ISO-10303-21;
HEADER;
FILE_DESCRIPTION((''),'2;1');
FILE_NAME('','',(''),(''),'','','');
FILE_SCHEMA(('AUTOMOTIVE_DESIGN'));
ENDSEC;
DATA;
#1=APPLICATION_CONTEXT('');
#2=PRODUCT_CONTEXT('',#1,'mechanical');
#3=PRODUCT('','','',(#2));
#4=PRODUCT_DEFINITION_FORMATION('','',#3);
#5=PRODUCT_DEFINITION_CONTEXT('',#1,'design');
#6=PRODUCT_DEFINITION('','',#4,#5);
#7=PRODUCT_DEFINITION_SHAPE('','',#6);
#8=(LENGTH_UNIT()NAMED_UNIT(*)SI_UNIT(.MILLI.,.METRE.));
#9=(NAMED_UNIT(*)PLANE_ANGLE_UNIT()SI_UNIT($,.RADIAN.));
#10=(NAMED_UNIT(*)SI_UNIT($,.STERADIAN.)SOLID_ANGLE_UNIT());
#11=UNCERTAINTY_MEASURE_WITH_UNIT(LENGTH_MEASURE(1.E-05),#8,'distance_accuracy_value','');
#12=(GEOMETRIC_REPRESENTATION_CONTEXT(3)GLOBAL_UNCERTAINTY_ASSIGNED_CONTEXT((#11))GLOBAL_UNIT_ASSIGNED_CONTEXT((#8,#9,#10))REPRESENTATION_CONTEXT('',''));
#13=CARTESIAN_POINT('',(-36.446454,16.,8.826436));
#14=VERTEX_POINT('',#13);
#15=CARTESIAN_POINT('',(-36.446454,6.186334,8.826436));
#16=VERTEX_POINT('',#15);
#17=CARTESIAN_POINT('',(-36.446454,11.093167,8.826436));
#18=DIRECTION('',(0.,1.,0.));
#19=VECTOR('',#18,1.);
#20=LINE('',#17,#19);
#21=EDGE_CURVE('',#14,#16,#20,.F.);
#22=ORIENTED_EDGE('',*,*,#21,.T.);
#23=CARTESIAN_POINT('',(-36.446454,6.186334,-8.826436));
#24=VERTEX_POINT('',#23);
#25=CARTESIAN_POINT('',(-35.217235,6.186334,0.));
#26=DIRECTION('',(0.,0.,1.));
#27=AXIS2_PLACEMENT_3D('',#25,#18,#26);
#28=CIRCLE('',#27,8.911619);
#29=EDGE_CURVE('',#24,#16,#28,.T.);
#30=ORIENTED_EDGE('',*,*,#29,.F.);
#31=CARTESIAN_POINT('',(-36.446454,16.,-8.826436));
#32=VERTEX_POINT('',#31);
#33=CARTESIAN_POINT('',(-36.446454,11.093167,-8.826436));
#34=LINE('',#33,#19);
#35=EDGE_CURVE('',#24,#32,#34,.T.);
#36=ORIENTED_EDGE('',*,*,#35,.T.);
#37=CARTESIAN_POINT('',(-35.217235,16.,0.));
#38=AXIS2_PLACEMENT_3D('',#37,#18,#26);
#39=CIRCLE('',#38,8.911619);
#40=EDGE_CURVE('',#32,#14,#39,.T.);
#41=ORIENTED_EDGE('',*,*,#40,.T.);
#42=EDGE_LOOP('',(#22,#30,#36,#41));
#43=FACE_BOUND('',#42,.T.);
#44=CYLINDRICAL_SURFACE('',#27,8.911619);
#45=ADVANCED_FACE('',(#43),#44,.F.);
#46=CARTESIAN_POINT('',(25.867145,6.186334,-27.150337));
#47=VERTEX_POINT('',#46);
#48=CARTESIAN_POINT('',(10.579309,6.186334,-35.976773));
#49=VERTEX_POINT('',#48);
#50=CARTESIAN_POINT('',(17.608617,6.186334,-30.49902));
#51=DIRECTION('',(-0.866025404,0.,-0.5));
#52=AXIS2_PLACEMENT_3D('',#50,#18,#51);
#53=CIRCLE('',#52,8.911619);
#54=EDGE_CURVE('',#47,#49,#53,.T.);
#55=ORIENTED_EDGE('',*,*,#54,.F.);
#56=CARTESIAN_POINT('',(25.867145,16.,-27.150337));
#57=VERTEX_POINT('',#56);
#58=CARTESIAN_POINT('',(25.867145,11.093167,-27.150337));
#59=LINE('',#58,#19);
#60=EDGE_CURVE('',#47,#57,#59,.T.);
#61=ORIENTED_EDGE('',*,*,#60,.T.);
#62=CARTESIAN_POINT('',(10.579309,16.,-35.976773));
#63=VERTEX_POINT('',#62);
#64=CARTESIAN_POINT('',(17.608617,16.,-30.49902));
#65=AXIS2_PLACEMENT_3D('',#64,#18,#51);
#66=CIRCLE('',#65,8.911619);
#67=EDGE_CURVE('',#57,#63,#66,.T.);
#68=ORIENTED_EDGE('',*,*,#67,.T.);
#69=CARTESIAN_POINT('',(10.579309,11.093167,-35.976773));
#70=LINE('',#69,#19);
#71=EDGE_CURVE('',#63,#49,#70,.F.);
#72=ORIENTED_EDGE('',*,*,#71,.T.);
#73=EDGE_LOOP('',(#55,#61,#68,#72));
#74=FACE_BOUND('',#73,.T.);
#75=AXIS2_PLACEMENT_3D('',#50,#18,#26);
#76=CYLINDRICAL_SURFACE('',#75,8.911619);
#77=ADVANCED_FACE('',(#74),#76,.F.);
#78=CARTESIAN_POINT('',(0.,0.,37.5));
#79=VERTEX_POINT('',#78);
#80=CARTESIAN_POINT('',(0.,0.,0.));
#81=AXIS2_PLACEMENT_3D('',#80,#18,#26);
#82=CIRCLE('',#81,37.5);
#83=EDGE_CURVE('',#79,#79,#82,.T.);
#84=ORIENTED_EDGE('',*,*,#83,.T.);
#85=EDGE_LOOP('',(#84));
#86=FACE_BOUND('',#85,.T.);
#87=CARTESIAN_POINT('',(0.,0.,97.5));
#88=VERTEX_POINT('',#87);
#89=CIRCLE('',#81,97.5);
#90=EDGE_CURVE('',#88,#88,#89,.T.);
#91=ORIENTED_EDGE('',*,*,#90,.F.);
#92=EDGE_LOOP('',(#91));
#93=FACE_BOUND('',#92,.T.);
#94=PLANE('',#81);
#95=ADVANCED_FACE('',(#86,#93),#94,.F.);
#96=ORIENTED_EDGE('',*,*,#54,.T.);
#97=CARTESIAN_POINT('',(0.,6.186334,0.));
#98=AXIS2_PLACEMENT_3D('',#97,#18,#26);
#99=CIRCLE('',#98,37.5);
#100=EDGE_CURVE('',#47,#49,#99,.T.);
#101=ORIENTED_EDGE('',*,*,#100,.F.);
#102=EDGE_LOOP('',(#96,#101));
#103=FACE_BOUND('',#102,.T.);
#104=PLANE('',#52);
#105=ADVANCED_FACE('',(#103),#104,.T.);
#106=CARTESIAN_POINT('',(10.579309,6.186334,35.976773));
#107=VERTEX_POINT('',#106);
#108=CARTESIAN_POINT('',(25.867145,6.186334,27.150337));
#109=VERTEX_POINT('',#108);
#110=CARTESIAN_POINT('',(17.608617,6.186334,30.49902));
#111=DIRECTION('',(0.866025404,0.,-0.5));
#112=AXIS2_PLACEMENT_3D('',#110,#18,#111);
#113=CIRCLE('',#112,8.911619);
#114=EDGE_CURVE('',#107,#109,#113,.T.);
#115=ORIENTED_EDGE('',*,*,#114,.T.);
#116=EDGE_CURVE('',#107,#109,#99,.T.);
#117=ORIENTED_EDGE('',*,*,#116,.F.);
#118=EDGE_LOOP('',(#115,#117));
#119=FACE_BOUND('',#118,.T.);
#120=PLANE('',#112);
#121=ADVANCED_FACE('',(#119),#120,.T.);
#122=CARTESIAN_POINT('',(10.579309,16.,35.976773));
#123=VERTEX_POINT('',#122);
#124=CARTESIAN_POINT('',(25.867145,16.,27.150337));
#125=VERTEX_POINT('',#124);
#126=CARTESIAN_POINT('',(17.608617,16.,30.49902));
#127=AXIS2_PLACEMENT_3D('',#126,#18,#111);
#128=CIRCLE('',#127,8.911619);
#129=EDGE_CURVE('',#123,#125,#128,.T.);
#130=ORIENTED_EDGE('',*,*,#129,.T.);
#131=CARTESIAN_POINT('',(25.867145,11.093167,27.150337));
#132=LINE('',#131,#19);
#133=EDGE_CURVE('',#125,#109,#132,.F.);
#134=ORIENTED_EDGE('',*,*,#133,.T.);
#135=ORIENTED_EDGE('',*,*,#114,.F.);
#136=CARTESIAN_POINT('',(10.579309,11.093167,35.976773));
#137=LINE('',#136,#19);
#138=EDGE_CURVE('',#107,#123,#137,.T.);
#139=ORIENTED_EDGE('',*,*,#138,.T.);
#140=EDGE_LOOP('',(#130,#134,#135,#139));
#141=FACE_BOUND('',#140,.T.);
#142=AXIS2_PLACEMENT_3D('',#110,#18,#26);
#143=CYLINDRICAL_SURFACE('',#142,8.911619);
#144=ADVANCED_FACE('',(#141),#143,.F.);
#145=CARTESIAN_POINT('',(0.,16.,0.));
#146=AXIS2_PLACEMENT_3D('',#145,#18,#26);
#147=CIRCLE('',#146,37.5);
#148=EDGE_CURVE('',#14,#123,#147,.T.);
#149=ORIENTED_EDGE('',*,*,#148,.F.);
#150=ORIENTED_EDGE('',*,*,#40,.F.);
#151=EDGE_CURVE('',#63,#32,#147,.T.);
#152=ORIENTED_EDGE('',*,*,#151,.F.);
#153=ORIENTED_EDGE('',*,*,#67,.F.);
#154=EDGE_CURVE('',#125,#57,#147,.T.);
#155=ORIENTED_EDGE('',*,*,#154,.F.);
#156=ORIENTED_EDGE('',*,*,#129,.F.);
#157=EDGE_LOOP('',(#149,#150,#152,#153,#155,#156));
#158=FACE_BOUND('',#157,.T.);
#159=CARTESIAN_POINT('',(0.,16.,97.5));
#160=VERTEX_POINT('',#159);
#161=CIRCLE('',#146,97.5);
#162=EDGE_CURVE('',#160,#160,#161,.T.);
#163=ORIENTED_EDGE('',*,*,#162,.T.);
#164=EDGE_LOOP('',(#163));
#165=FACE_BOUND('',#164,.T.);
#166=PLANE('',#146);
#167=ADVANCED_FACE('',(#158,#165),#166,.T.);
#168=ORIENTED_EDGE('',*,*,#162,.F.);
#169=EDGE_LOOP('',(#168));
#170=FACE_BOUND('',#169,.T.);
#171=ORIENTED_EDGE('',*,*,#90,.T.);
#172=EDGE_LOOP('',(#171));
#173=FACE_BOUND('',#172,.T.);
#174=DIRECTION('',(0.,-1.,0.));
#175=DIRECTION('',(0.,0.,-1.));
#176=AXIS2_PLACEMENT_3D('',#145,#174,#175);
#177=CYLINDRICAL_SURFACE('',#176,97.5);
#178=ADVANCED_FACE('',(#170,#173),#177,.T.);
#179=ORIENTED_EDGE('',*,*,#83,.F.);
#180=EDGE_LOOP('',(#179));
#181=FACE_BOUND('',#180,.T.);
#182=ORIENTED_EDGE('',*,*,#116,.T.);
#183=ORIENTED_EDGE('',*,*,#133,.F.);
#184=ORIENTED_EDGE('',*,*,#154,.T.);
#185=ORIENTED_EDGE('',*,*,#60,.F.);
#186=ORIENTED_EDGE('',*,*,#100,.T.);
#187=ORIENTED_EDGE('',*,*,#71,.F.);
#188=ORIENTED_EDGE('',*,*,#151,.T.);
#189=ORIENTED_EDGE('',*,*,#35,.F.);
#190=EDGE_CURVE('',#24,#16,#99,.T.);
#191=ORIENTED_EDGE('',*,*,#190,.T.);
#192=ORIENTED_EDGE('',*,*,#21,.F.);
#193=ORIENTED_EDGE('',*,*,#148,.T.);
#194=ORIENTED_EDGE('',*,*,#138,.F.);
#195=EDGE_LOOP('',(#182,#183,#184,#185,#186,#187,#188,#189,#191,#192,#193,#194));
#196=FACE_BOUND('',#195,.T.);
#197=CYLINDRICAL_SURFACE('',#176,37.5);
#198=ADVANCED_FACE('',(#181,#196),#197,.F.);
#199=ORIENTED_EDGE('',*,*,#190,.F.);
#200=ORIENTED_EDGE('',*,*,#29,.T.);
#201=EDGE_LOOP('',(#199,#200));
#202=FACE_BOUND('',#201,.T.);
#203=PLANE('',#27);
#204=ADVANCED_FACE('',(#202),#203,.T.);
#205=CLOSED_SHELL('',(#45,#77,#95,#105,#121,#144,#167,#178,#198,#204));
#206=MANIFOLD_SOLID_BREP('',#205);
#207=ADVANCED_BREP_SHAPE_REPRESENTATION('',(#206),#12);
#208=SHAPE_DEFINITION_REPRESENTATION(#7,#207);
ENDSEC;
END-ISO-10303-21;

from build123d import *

# Parameters (mm, degrees)
SKETCH1_R           = 97.5
BOSS_EXTRUDE1_DEPTH = 16
SKETCH2_R           = 37.5
CUT_EXTRUDE1_DEPTH  = 139.811022617
SKETCH3_R           = 8.911618978
CUT_EXTRUDE2_DEPTH  = 9.813665753
CIRPATTERN1_COUNT   = 3


with BuildPart() as part:
    # Sketch1 → Boss-Extrude1 (new body)
    with BuildSketch(Plane(origin=(0, 0, 0), x_dir=(1, 0, 0), z_dir=(0, 1, 0))):
        Circle(SKETCH1_R)
    extrude(amount=BOSS_EXTRUDE1_DEPTH)

    # Sketch2 → Cut-Extrude1 (cut, through all)
    with BuildSketch(Plane(origin=(0, 0, 0), x_dir=(1, 0, 0), z_dir=(0, 1, 0))):
        Circle(SKETCH2_R)
    extrude(amount=CUT_EXTRUDE1_DEPTH, mode=Mode.SUBTRACT)

    # Sketch3 → Cut-Extrude2 (cut)
    with BuildSketch(Plane(origin=(0, 16, 0), x_dir=(1, 0, 0), z_dir=(0, 1, 0))):
        with Locations((-35.217234562, 0)):
            Circle(SKETCH3_R)
    cut_extrude2 = extrude(amount=-CUT_EXTRUDE2_DEPTH, mode=Mode.SUBTRACT)

    # CirPattern1: Cut-Extrude2 ×3 about axis
    cirpattern1_axis = Axis((0, 0, 0), (0, 1, 0))
    for i in range(1, CIRPATTERN1_COUNT):
        add(cut_extrude2.rotate(cirpattern1_axis, i * 360 / CIRPATTERN1_COUNT), mode=Mode.SUBTRACT)


solid = part.part
